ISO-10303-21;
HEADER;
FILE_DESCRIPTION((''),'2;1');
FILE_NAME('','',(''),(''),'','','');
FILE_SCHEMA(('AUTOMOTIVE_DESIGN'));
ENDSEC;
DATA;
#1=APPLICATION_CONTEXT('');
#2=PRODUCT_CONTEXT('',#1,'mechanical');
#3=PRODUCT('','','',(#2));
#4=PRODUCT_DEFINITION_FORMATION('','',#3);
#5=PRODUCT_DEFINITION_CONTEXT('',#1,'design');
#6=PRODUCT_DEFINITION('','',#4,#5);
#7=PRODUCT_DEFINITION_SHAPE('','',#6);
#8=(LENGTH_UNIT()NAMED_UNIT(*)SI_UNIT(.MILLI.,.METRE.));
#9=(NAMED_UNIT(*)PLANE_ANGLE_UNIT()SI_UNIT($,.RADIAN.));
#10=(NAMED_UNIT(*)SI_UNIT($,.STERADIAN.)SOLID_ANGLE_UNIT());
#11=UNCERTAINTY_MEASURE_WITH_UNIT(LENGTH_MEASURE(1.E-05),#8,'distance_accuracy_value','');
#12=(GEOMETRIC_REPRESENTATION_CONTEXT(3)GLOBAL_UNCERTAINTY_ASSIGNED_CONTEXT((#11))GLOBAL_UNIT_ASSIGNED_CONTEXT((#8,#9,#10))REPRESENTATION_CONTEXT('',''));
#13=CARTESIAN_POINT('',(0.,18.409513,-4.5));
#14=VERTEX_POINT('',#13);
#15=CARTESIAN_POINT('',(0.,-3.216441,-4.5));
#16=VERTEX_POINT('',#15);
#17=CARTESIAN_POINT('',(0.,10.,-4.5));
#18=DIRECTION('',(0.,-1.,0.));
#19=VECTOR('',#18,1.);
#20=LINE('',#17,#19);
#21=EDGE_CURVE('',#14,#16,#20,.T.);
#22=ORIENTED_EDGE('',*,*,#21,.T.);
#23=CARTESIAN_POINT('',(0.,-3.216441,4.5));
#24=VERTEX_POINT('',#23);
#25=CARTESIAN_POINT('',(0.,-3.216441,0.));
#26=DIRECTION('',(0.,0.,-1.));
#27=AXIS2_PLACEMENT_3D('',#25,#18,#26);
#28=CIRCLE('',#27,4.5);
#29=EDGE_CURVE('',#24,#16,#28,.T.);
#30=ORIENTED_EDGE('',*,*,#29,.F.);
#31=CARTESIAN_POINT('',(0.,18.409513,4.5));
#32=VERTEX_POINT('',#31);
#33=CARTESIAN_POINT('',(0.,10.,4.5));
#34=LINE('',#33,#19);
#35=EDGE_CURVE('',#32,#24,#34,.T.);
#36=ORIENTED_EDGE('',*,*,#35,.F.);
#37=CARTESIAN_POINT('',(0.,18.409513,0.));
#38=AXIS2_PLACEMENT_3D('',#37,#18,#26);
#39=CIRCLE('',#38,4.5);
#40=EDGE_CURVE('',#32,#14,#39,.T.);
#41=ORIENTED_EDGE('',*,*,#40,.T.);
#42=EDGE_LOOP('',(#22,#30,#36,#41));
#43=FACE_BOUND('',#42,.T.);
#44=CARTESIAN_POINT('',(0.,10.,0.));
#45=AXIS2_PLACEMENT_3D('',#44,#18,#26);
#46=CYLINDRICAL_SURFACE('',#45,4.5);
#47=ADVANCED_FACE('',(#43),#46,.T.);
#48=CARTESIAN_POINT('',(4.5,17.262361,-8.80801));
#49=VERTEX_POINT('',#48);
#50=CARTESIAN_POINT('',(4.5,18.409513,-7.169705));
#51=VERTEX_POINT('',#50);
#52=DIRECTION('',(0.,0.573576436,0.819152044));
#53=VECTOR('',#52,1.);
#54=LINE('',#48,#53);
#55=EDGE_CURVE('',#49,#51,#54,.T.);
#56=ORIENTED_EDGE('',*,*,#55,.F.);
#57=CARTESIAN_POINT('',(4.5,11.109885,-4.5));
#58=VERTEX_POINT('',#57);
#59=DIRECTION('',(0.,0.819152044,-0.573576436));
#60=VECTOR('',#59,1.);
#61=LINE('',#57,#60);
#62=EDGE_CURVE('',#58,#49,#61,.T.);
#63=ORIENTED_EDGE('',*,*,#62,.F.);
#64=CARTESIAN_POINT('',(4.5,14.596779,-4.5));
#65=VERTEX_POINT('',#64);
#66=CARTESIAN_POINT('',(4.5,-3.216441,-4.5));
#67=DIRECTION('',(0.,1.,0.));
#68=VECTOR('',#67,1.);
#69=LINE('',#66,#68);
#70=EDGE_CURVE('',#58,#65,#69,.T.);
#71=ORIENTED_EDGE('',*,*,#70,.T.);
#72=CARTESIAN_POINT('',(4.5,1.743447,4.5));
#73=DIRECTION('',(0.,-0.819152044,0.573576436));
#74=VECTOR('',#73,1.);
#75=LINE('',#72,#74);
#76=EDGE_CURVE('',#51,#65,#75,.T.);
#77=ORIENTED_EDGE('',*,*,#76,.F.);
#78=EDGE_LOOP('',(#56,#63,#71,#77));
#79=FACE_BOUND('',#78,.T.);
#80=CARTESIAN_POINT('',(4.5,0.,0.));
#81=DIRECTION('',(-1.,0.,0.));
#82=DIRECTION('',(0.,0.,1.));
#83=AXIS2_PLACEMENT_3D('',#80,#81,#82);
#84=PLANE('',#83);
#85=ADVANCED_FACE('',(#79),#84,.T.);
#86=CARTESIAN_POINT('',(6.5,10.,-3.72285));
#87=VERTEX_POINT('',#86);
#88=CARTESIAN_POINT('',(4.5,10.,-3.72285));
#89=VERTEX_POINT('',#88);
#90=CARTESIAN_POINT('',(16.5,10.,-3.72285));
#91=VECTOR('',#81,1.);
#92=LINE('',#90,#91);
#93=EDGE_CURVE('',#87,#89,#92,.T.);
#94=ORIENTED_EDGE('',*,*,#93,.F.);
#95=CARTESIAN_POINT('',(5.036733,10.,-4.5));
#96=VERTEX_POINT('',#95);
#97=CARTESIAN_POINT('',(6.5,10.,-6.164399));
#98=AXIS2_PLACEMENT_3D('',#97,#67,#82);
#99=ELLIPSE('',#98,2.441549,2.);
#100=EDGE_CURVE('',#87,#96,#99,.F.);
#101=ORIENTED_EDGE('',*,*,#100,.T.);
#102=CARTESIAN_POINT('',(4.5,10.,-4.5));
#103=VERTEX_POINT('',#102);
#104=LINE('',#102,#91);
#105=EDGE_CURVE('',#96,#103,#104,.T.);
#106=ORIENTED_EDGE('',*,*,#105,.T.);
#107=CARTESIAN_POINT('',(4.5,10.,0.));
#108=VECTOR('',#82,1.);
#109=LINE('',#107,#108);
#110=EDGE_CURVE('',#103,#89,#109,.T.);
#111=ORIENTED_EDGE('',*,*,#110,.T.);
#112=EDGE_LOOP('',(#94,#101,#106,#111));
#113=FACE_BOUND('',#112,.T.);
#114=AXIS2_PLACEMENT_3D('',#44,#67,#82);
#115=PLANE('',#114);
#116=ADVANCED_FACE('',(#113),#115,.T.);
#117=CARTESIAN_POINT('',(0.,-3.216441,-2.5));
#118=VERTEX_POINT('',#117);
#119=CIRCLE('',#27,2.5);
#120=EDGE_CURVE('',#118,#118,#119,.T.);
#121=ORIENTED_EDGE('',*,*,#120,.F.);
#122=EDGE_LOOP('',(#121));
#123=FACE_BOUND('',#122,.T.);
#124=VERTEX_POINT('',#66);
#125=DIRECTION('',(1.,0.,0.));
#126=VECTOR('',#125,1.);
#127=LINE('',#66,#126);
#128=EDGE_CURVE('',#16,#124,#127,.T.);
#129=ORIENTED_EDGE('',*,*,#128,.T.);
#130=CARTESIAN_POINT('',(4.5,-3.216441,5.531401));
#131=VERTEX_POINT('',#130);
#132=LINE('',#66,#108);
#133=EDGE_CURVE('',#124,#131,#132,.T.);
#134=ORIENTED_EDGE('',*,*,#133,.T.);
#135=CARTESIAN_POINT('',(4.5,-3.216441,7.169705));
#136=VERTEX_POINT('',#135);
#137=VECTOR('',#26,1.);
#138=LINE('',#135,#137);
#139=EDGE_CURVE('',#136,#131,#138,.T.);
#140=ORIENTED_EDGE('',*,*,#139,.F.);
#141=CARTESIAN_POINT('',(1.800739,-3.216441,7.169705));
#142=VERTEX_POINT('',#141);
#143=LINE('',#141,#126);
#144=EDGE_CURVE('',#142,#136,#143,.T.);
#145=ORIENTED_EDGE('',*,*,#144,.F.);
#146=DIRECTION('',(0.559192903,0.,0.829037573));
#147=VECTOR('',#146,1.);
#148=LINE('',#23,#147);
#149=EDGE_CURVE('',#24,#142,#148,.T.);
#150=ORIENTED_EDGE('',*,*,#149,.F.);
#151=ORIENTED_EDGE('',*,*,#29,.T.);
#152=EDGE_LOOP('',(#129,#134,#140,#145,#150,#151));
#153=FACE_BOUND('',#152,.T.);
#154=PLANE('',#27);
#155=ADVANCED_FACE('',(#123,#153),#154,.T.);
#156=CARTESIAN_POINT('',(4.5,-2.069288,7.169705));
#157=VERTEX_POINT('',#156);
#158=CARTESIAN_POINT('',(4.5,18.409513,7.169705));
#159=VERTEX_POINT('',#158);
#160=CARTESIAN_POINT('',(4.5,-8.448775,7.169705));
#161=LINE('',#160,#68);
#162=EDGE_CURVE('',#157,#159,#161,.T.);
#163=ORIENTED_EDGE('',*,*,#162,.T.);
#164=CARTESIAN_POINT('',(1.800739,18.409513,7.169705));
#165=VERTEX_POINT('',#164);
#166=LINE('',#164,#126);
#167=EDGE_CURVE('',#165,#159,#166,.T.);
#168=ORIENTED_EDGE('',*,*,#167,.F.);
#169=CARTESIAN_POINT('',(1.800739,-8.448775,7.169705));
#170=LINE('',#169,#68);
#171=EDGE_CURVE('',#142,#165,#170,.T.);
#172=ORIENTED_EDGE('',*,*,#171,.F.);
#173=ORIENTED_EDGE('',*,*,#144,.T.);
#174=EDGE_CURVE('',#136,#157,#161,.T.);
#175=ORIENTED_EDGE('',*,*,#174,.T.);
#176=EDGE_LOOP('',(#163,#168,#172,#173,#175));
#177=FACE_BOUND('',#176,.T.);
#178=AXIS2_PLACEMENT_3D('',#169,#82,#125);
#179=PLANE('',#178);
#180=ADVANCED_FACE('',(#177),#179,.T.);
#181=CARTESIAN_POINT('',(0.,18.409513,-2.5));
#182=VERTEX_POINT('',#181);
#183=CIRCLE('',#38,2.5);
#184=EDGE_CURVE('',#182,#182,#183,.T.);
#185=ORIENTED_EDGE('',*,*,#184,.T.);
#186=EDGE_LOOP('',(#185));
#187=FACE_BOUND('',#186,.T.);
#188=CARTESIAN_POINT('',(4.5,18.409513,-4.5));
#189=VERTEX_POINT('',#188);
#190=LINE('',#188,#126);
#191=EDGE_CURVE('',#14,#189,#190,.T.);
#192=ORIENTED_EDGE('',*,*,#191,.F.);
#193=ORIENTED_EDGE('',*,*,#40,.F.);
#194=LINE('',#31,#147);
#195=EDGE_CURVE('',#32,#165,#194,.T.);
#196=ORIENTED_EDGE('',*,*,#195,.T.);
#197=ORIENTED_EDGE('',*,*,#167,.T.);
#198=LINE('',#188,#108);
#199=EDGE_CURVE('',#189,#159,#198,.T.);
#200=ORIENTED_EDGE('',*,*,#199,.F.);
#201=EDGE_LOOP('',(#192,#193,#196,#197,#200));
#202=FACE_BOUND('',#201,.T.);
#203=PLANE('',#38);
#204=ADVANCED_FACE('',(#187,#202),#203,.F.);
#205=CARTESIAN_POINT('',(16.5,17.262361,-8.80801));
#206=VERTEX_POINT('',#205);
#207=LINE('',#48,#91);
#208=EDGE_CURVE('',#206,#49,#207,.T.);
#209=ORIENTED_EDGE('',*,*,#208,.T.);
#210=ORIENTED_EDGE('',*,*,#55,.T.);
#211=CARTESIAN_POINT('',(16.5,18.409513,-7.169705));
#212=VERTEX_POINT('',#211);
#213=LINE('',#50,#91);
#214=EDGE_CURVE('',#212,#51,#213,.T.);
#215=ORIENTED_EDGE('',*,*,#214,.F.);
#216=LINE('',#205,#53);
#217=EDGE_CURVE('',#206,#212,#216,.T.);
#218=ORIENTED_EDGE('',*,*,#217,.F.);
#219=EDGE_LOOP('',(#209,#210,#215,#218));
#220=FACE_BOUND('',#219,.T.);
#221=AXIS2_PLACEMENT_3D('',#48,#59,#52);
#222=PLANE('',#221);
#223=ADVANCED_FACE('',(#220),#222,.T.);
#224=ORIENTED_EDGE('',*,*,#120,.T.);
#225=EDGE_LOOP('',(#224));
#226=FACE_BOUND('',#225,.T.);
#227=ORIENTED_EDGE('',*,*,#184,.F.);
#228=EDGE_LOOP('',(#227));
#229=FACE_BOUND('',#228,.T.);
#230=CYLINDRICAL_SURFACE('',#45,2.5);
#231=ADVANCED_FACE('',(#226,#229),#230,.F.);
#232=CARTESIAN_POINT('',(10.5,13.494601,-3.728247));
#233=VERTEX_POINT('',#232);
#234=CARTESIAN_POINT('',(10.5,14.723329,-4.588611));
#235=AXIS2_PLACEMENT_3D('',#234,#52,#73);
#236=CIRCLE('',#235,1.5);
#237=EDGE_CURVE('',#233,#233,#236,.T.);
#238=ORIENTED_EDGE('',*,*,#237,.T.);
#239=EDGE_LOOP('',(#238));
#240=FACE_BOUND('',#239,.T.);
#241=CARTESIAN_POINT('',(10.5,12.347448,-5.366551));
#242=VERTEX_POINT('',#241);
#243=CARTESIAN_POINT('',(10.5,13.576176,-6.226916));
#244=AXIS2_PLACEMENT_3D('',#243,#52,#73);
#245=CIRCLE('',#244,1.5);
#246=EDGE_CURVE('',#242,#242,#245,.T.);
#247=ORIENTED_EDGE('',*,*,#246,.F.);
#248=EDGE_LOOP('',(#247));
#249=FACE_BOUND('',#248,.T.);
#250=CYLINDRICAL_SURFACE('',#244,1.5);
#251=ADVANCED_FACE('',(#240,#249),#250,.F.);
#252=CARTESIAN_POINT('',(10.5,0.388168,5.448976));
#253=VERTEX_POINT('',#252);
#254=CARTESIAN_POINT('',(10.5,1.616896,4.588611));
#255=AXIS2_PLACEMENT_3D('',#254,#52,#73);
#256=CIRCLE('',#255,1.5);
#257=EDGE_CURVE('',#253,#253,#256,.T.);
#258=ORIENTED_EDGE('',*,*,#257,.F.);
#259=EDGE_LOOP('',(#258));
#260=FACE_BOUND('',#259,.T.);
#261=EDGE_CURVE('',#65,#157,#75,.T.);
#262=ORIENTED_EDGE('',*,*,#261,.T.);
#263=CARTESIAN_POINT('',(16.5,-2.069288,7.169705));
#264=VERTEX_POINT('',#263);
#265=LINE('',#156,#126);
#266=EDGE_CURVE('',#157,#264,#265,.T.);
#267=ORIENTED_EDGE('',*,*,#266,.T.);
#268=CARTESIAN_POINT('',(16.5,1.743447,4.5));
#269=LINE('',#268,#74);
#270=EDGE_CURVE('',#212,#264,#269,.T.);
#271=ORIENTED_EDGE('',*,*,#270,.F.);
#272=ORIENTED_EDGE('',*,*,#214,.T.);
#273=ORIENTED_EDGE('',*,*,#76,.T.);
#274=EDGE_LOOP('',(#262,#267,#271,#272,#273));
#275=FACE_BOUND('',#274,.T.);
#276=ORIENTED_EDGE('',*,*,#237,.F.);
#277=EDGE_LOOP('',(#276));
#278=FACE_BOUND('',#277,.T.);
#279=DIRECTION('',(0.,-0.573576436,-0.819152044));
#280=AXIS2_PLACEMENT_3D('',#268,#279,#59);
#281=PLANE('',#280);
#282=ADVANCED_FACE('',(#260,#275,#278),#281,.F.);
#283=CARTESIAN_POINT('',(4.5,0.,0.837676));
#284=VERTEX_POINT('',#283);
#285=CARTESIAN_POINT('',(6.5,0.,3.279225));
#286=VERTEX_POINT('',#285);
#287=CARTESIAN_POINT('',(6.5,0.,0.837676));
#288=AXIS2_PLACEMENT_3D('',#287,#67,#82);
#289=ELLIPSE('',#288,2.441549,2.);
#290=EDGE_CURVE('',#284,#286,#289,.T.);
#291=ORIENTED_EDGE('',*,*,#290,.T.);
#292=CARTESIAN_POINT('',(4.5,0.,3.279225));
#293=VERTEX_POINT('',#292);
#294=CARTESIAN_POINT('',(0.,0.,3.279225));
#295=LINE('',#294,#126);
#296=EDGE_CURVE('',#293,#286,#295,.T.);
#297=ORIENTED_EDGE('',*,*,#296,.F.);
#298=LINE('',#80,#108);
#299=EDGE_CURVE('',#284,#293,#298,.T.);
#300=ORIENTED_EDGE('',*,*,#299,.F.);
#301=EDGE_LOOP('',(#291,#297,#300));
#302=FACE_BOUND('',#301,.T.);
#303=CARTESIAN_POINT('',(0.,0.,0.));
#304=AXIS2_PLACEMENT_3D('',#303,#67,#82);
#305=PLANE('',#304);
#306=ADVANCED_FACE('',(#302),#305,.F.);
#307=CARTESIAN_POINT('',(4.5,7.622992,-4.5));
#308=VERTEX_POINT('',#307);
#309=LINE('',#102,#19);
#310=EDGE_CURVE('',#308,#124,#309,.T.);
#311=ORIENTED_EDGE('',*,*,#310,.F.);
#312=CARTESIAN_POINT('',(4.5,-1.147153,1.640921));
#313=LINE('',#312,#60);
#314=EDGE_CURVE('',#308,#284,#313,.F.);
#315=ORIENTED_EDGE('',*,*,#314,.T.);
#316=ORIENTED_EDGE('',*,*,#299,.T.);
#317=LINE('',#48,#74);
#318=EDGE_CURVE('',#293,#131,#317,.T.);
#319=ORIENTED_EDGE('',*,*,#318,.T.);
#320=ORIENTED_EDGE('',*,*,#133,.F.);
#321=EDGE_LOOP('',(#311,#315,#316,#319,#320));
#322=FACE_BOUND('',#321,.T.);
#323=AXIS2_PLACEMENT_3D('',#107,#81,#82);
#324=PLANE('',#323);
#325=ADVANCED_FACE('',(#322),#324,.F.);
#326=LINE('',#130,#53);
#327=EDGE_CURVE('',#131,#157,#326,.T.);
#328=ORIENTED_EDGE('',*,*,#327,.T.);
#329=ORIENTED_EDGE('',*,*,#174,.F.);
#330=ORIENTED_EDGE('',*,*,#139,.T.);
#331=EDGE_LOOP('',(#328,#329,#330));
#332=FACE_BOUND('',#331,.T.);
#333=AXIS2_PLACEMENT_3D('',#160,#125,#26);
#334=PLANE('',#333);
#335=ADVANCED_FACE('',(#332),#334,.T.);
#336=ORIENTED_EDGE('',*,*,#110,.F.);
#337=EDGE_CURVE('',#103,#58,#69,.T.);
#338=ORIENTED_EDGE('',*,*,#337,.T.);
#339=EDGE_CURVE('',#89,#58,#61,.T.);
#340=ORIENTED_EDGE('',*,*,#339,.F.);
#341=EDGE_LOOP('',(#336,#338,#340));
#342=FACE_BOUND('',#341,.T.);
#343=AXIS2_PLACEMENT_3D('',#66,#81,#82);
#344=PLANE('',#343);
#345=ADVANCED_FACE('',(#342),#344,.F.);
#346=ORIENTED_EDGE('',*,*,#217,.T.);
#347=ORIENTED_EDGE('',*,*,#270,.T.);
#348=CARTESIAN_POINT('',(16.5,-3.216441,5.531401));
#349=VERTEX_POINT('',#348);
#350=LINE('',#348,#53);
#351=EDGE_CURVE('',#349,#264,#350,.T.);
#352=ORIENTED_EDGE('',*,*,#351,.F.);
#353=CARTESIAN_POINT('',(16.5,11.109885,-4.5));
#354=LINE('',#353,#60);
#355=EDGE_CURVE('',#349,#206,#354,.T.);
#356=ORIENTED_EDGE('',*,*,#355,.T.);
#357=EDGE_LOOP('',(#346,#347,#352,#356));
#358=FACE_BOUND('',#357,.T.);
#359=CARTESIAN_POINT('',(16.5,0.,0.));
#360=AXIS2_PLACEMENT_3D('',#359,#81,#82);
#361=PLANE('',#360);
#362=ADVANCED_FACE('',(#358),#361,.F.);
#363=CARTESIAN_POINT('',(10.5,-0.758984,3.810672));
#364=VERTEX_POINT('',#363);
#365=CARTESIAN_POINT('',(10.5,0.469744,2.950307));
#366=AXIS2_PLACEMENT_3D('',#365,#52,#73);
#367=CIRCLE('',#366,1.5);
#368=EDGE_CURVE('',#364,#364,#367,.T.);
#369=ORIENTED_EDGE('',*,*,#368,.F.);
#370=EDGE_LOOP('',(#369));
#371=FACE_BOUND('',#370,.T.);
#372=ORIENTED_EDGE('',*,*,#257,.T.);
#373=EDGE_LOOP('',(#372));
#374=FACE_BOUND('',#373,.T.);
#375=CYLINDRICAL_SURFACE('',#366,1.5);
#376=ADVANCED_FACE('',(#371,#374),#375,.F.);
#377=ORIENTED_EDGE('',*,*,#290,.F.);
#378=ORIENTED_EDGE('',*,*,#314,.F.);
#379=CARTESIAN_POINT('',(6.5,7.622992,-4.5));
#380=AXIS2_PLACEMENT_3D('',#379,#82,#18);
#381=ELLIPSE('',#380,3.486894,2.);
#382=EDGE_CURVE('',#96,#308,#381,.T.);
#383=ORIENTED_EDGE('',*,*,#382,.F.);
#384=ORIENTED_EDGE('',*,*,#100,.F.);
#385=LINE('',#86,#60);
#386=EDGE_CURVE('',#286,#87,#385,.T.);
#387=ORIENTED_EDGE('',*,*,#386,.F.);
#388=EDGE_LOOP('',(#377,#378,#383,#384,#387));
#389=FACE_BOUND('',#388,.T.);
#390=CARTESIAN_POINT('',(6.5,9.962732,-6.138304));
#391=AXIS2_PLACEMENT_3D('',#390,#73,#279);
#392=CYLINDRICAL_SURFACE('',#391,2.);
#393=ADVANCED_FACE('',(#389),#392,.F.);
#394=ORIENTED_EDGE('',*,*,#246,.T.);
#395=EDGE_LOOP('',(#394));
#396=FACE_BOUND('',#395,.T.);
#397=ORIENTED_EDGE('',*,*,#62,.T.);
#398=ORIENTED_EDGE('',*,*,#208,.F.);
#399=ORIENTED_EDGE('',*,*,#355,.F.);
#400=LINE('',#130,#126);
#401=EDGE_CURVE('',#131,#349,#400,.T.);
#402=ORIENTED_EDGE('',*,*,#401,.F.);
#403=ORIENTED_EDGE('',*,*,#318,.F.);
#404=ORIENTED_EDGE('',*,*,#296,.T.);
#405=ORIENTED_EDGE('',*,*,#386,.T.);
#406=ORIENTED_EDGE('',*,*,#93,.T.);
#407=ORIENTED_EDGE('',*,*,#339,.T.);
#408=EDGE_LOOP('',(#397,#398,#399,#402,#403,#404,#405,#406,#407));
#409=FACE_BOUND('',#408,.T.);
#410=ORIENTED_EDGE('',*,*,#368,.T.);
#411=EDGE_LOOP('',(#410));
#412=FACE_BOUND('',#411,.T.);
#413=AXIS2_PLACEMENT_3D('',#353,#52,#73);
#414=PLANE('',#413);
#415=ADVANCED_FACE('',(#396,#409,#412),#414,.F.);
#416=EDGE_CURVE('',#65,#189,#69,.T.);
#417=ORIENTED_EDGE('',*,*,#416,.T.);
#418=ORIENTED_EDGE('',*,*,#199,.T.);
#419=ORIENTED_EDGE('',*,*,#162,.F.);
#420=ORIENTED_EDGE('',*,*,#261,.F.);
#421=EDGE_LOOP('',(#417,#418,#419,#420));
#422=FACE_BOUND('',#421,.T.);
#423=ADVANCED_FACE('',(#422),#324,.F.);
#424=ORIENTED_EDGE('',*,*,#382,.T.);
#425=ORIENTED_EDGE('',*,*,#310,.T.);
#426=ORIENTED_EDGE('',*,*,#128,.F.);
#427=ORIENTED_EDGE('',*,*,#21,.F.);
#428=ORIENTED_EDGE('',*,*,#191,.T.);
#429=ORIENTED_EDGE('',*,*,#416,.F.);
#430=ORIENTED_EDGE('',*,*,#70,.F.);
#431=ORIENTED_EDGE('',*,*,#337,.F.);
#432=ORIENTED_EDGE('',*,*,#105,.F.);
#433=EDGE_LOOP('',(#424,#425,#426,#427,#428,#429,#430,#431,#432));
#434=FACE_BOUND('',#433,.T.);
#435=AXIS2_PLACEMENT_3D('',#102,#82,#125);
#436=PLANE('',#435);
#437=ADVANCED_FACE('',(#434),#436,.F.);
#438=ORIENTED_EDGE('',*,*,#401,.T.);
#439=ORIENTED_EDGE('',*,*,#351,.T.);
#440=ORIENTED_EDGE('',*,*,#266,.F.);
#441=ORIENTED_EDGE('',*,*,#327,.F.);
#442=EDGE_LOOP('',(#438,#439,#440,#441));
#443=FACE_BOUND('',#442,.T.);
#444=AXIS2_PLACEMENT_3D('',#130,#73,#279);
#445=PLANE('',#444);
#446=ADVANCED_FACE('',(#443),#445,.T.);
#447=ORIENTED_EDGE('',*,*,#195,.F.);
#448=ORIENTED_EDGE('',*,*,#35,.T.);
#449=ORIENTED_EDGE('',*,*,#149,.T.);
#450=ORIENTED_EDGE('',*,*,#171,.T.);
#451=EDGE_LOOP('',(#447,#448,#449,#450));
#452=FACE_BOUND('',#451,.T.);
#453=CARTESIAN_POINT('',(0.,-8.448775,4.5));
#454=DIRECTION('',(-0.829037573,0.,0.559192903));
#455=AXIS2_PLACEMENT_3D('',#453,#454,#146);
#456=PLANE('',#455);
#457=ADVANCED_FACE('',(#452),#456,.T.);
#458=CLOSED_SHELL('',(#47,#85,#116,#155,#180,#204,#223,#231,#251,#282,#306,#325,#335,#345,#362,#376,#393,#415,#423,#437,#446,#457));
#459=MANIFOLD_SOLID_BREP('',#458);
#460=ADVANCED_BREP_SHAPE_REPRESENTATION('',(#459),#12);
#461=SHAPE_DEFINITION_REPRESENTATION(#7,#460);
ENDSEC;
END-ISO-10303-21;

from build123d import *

# Parameters (mm, degrees)
CROQUIS1_R                   = 2.5000000000000004
SALIENTE_EXTRUIR1_DEPTH      = 10
SALIENTE_EXTRUIR2_DEPTH      = 12
CROQUIS3_R                   = 1.5000000000000024
SALIENTE_EXTRUIR3_DEPTH      = 2
REDONDEO1_R                  = 2
CROQUIS4_R                   = 1.5000000000000024
CORTAR_EXTRUIR1_DEPTH        = 6
SALIENTE_EXTRUIR4_DEPTH      = 3.21644
SALIENTE_EXTRUIR4_DEPTH_BACK = 18.409513
CROQUIS6_R                   = 2.5
SALIENTE_EXTRUIR5_START      = -21.625954
SALIENTE_EXTRUIR5_DEPTH      = 21.625954


with BuildPart() as part:
    # Croquis1 → Saliente-Extruir1 (new body)
    with BuildSketch(Plane(origin=(0, 0, 0), x_dir=(1, 0, 0), z_dir=(0, 1, 0))):
        with BuildLine():
            Line((0, -4.5), (4.5, -4.5))
            Line((4.5, -4.5), (4.5, 0))
            Line((4.5, 0), (4.5, 4.5))
            Line((4.5, 4.5), (0, 4.5))
            ThreePointArc((0, 4.5), (-4.5, 5.5e-16), (0, -4.5))
        make_face()
        with Locations(Location((0, 0, 0), (0, 0, 270))):
            Circle(CROQUIS1_R, mode=Mode.SUBTRACT)
    extrude(amount=SALIENTE_EXTRUIR1_DEPTH)

    # Croquis2 → Saliente-Extruir2 (add)
    with BuildSketch(Plane(origin=(4.5, 0, 0), x_dir=(0, 0, -1), z_dir=(1, 0, 0))):
        Polygon((-4.5, 0), (-4.5, 1.7434467956210846), (4.5, 14.596778856299984), (4.5, 11.10988526505781), (-3.2792254112385364, 0), align=None)
    extrude(amount=SALIENTE_EXTRUIR2_DEPTH)

    # Croquis3 → Saliente-Extruir3 (add)
    with BuildSketch(Plane(origin=(0, 2.68788483311935, 3.838697366771722), x_dir=(1, 0, 0), z_dir=(0, 0.57357643635105, 0.819152044288989))):
        Polygon((4.5, 19.19256462345726), (16.5, 19.19256462345726), (16.500000000000004, -5.807435376542737), (4.500000000000008, -5.807435376542739), align=None)
        with Locations(Location((10.5, 14.692564623457262, 0), (0, 0, 270))):
            Circle(CROQUIS3_R, mode=Mode.SUBTRACT)
        with Locations((10.500000000000002, -1.307435376542739)):
            Circle(CROQUIS3_R, mode=Mode.SUBTRACT)
    extrude(amount=-SALIENTE_EXTRUIR3_DEPTH)

    # Redondeo1
    # the kernel refuses this fillet: 2 mm, written as the material it adds along each edge
    with BuildSketch(Plane(origin=(4.5, 14.095760221444946, -6.590732152613882), x_dir=(0, -0.5735764363510499, -0.8191520442889891), z_dir=(0, -0.8191520442889891, 0.5735764363510499))) as redondeo1_piece_1_section:
        with BuildLine():
            CenterArc((REDONDEO1_R, REDONDEO1_R), REDONDEO1_R, 180, 90)
            Line((2.9e-16, REDONDEO1_R), (0, 0))
            Line((0, 0), (REDONDEO1_R, 0))
        make_face()
    redondeo1_piece_1 = extrude(amount=22.207745887614607, mode=Mode.PRIVATE)
    redondeo1_piece_1 = split(redondeo1_piece_1, bisect_by=Plane(origin=(4.952132948242019, 4.929093638164552, -4.5), z_dir=(0, 0, 1)), keep=Keep.TOP, mode=Mode.PRIVATE)
    redondeo1_piece_1 = split(redondeo1_piece_1, bisect_by=Plane(origin=(4.952132948242019, 10, -0.7036487498955591), z_dir=(0, -1, 0)), keep=Keep.TOP, mode=Mode.PRIVATE)
    redondeo1_piece_1 = split(redondeo1_piece_1, bisect_by=Plane(origin=(4.952132948242019, 0, -0.7036487498955591), z_dir=(0, 1, 0)), keep=Keep.TOP, mode=Mode.PRIVATE)
    add(redondeo1_piece_1)

    # Croquis4 → Cortar-Extruir1 (cut)
    with BuildSketch(Plane(origin=(0, 2.68788483311935, 3.838697366771722), x_dir=(1, 0, 0), z_dir=(0, 0.57357643635105, 0.819152044288989))):
        with Locations(Location((10.5, 14.69256462345726, 0), (0, 0, 270))):
            Circle(CROQUIS4_R)
        with Locations(Location((10.500000000000002, -1.3074353765427391, 0), (0, 0, 270))):
            Circle(CROQUIS4_R)
    extrude(amount=-CORTAR_EXTRUIR1_DEPTH, mode=Mode.SUBTRACT)

    # Croquis6 → Saliente-Extruir4 (add, two sides: drawn at the far end of the back side and taken through both)
    with BuildSketch(Plane.XZ.offset(-SALIENTE_EXTRUIR4_DEPTH_BACK)):
        with BuildLine():
            Line((4.5, -4.5), (0, -4.5))
            ThreePointArc((0, -4.5), (-4.5, 5.5e-16), (0, 4.5))
            Line((0, 4.5), (4.500000000000005, 4.5))
            Line((4.500000000000005, 4.5), (4.5, -4.5))
        make_face()
        with Locations(Location((0, 0, 0), (0, 0, 270))):
            Circle(CROQUIS6_R, mode=Mode.SUBTRACT)
    extrude(amount=SALIENTE_EXTRUIR4_DEPTH + SALIENTE_EXTRUIR4_DEPTH_BACK)

    # Croquis7 → Saliente-Extruir5 (add)
    with BuildSketch(Plane(origin=(0, 18.409513379572896, 0), x_dir=(1, 0, 0), z_dir=(0, 1, 0)).offset(SALIENTE_EXTRUIR5_START)):
        Polygon((5.5e-16, -4.5), (1.8007390664454916, -7.169705454388125), (4.500000000000005, -7.169705454388125), (4.500000000000005, -4.5), align=None)
    extrude(amount=SALIENTE_EXTRUIR5_DEPTH)


solid = part.part
